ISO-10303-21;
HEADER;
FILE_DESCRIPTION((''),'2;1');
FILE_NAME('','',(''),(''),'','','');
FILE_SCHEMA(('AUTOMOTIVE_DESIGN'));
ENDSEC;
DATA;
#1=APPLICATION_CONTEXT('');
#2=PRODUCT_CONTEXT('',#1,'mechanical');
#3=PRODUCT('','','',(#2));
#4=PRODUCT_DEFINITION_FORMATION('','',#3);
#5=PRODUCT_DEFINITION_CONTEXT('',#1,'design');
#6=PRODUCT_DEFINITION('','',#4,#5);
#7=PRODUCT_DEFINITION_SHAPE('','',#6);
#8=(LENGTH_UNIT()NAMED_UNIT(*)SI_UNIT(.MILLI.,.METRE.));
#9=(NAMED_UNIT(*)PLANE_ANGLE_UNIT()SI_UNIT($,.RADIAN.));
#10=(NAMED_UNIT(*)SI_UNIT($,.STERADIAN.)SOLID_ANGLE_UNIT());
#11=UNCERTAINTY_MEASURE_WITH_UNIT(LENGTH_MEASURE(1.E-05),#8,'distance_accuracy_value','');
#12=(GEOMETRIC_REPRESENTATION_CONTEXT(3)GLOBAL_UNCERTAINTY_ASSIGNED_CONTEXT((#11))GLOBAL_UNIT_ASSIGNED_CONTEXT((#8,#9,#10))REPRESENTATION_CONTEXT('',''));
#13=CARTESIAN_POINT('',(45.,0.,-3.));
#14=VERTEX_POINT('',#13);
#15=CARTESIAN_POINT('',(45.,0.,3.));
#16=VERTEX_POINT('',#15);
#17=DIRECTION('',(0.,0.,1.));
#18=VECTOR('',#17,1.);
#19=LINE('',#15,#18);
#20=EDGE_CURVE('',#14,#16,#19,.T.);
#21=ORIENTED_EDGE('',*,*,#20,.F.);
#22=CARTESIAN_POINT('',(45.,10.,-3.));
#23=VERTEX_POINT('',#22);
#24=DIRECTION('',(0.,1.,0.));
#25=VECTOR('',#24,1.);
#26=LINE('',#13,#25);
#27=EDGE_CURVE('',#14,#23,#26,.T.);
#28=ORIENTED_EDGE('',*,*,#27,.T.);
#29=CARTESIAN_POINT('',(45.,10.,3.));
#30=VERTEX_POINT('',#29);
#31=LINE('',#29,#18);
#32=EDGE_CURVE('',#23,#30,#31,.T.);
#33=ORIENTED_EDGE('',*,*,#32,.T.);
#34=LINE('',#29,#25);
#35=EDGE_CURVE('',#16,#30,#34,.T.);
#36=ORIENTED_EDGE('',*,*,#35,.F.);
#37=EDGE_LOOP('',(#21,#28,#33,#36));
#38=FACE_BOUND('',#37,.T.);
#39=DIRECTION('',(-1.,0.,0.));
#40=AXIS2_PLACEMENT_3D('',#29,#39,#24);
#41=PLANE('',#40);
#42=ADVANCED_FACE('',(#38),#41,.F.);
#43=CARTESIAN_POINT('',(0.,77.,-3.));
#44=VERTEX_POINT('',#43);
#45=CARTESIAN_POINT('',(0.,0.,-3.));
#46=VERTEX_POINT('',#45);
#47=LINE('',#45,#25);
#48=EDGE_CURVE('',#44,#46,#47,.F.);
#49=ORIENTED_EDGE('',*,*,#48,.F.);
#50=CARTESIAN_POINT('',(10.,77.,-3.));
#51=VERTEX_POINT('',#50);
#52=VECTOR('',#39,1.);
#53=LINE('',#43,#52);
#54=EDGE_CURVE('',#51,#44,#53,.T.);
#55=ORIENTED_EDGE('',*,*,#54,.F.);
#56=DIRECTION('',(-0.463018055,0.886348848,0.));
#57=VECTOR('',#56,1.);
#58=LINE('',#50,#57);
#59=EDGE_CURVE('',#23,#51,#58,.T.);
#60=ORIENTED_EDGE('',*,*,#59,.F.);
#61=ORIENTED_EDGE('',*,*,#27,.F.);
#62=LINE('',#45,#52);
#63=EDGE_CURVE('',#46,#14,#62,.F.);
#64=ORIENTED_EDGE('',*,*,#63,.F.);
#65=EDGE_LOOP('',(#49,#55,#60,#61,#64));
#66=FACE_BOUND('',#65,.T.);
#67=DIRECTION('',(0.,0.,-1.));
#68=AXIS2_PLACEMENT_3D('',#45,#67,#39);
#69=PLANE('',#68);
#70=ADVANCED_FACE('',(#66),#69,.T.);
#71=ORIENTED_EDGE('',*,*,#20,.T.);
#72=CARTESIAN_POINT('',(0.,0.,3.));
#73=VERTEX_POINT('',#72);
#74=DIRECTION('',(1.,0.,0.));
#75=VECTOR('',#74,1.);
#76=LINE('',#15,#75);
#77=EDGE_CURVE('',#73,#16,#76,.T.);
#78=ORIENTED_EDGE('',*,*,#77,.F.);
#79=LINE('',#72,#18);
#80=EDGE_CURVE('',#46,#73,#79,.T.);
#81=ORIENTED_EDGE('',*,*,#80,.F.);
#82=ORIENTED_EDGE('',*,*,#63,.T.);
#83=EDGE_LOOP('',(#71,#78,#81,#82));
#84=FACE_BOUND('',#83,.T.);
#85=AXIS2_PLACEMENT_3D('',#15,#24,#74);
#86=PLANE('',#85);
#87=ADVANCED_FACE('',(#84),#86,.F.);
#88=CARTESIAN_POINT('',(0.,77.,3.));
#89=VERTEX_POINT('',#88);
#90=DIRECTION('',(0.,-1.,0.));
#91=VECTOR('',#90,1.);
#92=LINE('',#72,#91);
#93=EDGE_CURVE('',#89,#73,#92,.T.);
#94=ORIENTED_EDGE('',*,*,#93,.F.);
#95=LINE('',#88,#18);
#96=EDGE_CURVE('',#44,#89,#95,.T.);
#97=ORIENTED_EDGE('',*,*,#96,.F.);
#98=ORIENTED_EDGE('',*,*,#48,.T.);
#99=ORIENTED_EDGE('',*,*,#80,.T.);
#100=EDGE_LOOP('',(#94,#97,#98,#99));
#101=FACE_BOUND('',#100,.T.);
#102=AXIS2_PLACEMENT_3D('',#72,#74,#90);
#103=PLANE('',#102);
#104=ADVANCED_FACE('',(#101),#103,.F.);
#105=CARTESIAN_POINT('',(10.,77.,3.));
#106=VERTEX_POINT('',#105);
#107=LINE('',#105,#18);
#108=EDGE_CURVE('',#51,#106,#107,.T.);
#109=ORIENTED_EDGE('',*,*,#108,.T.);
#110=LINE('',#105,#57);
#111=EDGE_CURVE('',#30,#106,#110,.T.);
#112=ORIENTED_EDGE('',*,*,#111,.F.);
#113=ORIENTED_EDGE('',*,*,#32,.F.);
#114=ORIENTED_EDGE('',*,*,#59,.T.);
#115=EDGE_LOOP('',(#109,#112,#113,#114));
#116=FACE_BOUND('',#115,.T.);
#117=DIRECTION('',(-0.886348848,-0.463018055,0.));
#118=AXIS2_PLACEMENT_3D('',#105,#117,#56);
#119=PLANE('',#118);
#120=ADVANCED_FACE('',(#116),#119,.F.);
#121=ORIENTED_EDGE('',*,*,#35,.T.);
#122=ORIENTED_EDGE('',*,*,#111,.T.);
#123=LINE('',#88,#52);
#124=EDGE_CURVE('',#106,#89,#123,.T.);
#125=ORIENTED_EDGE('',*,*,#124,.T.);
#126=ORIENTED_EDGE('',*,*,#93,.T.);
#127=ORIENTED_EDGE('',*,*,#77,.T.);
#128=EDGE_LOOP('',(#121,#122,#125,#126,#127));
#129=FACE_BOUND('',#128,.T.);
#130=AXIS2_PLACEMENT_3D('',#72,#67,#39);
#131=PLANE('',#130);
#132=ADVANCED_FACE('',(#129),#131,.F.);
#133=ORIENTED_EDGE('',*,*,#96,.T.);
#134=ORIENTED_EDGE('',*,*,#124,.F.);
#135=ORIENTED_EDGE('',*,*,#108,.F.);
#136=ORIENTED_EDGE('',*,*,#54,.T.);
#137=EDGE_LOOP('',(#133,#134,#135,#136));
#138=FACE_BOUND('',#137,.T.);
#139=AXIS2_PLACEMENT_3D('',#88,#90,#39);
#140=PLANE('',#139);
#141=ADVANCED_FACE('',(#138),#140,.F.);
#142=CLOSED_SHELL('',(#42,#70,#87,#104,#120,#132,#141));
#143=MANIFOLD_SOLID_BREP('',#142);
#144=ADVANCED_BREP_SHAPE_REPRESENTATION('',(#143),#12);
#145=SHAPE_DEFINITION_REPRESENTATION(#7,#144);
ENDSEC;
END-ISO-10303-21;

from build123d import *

# Parameters (mm, degrees)
EXTRUDE_1_DEPTH = 3


with BuildPart() as part:
    # Sketch 1 → Бобышка-Вытянуть1 (new, symmetric)
    with BuildSketch(Plane.XY):
        Polygon((45, 0), (0, 0), (0, 77), (10, 77), (45, 10), align=None)
    extrude(amount=EXTRUDE_1_DEPTH, both=True)


solid = part.part
